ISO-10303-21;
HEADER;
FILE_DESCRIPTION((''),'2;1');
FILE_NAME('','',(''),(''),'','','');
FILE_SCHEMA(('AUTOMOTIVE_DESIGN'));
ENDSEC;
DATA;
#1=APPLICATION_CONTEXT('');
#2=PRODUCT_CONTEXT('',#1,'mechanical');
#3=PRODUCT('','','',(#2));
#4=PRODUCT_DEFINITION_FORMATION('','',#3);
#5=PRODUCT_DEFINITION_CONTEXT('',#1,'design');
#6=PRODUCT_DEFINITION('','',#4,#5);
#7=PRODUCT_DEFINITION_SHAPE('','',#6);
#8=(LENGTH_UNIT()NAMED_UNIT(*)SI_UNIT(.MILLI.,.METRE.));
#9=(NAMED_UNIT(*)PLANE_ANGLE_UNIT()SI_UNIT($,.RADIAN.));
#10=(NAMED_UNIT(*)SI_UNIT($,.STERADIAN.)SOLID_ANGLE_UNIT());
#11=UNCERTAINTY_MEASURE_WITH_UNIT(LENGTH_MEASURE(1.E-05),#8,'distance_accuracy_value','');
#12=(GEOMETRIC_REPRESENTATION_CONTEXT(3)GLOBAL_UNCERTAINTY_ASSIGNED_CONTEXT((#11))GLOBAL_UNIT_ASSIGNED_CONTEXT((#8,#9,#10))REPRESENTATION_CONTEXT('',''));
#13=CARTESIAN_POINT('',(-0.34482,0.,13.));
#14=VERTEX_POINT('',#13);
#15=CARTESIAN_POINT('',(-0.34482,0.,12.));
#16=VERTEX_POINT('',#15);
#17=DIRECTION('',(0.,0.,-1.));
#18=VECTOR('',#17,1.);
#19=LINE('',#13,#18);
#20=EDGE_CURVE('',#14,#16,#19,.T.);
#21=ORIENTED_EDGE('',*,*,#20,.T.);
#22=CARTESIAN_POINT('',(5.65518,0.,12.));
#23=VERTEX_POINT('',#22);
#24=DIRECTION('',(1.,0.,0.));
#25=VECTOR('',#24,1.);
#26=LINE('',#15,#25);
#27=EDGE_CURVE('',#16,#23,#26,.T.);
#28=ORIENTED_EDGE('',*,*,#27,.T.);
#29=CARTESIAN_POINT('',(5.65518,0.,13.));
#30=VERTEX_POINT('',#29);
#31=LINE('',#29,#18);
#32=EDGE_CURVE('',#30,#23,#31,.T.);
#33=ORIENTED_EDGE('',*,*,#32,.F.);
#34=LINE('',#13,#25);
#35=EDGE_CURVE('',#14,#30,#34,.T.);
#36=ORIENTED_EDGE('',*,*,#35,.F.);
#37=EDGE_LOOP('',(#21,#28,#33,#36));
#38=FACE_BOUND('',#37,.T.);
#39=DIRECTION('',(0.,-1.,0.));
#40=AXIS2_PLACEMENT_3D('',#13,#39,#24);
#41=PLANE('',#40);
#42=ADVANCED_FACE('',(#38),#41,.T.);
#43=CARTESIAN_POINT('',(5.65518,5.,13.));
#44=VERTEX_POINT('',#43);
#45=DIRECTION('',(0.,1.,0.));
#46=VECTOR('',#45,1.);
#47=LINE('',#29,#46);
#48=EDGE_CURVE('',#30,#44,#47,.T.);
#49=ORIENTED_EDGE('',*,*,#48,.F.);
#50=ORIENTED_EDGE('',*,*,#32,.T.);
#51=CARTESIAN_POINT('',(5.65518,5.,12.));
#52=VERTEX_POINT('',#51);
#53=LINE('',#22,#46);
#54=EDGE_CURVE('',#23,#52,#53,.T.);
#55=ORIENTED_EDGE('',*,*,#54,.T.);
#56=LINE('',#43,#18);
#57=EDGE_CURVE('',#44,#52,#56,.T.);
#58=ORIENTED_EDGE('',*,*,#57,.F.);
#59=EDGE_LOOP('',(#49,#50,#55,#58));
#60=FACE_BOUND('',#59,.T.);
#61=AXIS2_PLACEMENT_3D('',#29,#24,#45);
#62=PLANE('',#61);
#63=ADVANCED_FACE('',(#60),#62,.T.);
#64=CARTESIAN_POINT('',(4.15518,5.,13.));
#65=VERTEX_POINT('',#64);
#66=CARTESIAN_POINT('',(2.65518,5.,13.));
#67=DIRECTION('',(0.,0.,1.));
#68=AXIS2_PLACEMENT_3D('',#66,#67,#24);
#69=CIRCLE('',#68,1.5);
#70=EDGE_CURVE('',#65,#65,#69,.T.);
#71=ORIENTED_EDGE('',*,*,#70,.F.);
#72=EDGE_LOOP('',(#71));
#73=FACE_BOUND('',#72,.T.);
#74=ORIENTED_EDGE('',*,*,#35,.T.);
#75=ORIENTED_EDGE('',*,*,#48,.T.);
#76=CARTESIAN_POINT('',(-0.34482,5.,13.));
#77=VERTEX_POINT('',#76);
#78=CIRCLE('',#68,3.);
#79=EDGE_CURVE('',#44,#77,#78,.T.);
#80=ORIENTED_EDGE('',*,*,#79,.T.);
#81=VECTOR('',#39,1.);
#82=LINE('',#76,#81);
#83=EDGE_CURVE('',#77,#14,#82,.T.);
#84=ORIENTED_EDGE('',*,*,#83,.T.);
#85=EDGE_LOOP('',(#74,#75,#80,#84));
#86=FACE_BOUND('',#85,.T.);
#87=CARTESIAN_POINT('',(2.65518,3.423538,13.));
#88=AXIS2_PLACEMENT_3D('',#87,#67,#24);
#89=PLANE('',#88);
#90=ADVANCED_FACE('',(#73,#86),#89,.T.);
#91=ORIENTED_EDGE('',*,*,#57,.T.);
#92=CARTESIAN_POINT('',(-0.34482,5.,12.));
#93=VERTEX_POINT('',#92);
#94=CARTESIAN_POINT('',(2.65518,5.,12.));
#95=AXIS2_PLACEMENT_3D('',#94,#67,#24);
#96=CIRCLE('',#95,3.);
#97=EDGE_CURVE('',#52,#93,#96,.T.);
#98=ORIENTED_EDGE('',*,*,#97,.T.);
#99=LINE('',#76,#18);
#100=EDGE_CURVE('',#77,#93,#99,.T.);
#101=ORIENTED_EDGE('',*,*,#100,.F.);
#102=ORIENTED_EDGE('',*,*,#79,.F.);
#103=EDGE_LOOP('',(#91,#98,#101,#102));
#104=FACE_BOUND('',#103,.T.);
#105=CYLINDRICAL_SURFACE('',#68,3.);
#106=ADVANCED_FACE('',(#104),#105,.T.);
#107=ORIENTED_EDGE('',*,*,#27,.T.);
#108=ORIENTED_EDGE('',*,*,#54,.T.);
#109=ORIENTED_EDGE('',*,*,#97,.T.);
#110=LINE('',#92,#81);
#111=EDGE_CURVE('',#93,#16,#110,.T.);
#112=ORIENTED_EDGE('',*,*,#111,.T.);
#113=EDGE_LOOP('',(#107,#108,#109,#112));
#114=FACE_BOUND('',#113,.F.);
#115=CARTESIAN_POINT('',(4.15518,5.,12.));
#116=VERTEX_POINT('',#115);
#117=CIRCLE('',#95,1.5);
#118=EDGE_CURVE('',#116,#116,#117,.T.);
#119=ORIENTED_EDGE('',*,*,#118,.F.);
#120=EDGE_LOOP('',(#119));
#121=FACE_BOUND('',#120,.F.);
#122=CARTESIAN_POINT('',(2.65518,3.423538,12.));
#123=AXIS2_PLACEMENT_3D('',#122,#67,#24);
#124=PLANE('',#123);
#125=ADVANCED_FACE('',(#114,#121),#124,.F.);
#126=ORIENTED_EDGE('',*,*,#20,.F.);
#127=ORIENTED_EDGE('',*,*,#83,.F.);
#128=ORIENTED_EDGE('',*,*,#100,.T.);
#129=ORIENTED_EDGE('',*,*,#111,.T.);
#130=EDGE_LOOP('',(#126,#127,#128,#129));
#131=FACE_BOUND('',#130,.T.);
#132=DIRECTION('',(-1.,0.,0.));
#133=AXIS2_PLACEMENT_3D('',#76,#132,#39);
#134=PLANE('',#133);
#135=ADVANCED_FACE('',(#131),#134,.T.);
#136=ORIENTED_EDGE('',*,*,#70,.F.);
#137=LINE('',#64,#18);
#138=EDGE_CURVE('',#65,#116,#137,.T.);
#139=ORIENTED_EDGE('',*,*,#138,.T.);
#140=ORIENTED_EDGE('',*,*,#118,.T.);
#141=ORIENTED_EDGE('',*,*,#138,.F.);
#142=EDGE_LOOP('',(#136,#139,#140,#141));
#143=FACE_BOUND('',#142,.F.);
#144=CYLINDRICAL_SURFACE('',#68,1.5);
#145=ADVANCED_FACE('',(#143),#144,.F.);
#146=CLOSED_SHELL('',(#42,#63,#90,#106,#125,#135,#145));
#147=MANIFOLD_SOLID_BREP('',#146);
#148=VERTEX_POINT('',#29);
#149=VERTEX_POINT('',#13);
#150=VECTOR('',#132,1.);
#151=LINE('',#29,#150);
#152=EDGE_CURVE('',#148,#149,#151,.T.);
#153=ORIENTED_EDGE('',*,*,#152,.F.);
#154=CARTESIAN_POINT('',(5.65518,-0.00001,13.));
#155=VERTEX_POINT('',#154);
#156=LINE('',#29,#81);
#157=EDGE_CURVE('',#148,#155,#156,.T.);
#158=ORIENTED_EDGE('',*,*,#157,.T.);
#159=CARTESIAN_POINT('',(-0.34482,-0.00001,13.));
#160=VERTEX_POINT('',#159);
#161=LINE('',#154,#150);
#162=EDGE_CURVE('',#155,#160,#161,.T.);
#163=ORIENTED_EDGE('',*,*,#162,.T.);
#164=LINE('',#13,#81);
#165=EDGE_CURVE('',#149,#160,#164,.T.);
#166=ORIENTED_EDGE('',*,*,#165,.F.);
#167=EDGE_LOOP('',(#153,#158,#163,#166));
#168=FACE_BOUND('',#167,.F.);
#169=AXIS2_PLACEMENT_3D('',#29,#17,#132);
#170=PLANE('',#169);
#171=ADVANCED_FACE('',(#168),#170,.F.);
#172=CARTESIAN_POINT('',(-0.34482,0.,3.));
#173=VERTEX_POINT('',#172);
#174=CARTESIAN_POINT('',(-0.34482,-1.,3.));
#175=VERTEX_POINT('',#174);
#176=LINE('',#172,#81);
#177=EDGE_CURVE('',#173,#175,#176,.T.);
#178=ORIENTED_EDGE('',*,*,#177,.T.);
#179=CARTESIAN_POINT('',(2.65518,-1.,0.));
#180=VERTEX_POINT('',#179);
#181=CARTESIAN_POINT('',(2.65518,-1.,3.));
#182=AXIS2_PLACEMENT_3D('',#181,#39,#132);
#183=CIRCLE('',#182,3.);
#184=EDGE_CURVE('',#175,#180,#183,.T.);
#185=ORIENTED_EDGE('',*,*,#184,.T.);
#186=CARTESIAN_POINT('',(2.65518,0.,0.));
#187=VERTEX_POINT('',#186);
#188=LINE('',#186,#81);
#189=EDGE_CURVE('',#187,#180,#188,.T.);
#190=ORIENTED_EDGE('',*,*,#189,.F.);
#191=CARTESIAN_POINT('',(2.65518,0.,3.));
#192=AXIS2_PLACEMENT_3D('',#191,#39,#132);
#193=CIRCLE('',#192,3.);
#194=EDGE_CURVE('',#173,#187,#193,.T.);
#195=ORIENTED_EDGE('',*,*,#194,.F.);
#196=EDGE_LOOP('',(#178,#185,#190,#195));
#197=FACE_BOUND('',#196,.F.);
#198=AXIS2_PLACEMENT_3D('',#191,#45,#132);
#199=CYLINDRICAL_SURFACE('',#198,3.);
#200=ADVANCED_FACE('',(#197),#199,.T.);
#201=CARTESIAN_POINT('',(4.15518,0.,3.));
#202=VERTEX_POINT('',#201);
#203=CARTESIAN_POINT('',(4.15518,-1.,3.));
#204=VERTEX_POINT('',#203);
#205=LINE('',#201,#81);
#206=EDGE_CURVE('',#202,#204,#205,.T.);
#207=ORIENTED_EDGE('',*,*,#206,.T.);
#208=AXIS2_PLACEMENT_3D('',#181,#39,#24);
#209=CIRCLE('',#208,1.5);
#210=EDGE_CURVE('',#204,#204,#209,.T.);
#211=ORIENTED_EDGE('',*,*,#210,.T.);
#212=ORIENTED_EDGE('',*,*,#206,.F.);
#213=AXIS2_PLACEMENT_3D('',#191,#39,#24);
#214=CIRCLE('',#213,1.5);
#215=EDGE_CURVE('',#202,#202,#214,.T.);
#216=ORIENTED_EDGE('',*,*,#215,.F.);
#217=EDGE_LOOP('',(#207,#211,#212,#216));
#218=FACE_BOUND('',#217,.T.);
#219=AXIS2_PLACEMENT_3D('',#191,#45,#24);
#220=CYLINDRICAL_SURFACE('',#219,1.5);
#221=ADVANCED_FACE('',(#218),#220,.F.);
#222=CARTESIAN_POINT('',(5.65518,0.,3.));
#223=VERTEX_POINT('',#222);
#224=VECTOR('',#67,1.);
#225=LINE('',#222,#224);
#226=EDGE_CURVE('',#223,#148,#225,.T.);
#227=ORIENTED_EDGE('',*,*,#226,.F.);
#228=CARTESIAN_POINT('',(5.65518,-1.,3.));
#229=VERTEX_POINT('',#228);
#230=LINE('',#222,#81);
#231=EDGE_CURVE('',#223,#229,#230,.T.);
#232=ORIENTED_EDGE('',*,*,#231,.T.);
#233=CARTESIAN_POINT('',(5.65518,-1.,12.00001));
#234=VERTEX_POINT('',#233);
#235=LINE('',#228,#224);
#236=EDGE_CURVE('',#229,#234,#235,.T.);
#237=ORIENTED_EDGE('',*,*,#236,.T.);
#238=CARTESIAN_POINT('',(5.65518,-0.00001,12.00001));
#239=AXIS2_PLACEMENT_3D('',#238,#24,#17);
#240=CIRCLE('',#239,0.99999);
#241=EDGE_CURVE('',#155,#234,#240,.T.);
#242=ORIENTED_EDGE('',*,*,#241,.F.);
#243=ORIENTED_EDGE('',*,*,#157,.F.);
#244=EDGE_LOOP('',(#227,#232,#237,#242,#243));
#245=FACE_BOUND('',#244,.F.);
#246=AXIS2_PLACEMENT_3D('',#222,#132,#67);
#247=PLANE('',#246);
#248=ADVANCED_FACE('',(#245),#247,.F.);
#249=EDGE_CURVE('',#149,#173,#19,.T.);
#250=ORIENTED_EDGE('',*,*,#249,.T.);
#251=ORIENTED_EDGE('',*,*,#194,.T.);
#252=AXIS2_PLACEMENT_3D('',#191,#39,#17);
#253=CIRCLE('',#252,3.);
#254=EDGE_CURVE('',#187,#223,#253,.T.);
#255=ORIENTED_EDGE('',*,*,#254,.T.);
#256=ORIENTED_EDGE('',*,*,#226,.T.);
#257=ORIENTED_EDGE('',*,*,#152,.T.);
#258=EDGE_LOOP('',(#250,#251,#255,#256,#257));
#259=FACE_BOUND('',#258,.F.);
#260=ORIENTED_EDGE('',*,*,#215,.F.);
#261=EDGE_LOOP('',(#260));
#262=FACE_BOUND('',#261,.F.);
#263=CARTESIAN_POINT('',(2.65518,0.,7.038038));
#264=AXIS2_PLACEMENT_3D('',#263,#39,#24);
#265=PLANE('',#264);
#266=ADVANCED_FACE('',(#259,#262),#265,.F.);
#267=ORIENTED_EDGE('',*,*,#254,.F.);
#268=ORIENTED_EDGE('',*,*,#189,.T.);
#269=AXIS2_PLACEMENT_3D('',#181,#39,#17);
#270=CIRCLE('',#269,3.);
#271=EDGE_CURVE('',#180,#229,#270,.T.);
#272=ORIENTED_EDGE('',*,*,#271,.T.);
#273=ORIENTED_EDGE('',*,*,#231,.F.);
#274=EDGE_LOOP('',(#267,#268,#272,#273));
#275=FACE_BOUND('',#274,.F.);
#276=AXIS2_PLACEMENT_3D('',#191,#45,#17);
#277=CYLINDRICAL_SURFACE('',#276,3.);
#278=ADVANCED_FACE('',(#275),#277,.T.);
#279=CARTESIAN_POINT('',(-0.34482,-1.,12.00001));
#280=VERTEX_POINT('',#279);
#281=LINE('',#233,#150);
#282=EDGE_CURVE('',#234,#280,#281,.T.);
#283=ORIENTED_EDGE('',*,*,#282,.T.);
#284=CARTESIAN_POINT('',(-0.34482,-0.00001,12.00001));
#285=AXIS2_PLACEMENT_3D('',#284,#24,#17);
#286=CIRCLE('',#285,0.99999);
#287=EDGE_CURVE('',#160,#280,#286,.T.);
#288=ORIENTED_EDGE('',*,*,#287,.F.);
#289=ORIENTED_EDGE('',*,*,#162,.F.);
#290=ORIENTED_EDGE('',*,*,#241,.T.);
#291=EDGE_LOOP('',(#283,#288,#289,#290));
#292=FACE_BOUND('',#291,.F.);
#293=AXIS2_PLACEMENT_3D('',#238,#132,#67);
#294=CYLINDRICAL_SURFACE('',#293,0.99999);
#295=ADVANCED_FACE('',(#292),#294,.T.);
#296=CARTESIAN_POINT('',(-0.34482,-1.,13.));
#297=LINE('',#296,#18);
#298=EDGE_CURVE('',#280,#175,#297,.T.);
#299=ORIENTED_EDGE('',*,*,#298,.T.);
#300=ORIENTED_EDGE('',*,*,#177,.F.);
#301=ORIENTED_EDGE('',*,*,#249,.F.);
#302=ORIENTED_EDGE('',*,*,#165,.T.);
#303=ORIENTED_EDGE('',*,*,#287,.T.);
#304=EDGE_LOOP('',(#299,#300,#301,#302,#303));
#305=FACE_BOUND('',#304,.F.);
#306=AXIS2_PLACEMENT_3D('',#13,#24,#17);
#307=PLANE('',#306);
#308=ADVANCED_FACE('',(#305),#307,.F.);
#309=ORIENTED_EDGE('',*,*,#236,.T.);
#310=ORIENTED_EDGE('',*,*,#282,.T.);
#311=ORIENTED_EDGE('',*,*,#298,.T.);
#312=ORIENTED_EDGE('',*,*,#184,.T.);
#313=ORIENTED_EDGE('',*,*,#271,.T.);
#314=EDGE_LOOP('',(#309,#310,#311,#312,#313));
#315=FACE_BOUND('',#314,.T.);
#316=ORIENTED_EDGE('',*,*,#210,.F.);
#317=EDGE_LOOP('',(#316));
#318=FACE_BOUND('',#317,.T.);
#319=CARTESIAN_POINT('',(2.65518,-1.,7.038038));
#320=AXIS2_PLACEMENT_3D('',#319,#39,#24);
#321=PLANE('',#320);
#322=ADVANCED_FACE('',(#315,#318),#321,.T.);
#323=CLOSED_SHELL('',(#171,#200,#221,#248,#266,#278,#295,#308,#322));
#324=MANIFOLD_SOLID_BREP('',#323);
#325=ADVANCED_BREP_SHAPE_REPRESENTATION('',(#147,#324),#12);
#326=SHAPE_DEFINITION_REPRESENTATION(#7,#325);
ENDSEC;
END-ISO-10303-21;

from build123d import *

# Parameters (mm, degrees)
F0_R     = 1.5
F1_DEPTH = 1
F2_R     = 1.5
F3_DEPTH = 1
F4_R     = 0.99999


# Not quite as in the source:
# - a fillet or chamfer is up to 0.001 mm smaller than in the source, because OpenCascade refuses the exact size


with BuildPart() as f1:
    # F0 (on Front) → F1 (new body)
    with BuildSketch(Plane.XZ):
        with BuildLine():
            Line((-0.3448204223, 13), (-0.3448204223, 3))
            ThreePointArc((-0.3448204223, 3), (0.5338592341, 0.8786796564), (2.6551795777, 0))
            ThreePointArc((2.6551795777, 0), (4.7764999212, 0.8786796564), (5.6551795777, 3))
            Line((5.6551795777, 3), (5.6551795777, 13))
            Line((5.6551795777, 13), (-0.3448204223, 13))
        make_face()
        with Locations((2.6551795777, 3)):
            Circle(F0_R, mode=Mode.SUBTRACT)
    extrude(amount=F1_DEPTH)

    # F4 (radius 1 in the source; OpenCascade refuses exactly that, so slightly less here)
    f4_edges = [f1.edges().sort_by_distance(p)[0] for p in [
        (2.65518, -1, 13),
    ]]
    fillet(f4_edges, radius=F4_R)


with BuildPart() as f3:
    # F2 (on face) → F3 (new body)
    with BuildSketch(Plane.XY.offset(13)):
        with BuildLine():
            Line((-0.3448204223, 5), (-0.3448204223, 0))
            Line((-0.3448204223, 0), (5.6551795777, 0))
            Line((5.6551795777, 0), (5.6551795777, 5))
            ThreePointArc((5.6551795777, 5), (2.6551795777, 8), (-0.3448204223, 5))
        make_face()
        with Locations((2.6551795777, 5)):
            Circle(F2_R, mode=Mode.SUBTRACT)
    extrude(amount=-F3_DEPTH)


solid = Compound([f1.part, f3.part])
